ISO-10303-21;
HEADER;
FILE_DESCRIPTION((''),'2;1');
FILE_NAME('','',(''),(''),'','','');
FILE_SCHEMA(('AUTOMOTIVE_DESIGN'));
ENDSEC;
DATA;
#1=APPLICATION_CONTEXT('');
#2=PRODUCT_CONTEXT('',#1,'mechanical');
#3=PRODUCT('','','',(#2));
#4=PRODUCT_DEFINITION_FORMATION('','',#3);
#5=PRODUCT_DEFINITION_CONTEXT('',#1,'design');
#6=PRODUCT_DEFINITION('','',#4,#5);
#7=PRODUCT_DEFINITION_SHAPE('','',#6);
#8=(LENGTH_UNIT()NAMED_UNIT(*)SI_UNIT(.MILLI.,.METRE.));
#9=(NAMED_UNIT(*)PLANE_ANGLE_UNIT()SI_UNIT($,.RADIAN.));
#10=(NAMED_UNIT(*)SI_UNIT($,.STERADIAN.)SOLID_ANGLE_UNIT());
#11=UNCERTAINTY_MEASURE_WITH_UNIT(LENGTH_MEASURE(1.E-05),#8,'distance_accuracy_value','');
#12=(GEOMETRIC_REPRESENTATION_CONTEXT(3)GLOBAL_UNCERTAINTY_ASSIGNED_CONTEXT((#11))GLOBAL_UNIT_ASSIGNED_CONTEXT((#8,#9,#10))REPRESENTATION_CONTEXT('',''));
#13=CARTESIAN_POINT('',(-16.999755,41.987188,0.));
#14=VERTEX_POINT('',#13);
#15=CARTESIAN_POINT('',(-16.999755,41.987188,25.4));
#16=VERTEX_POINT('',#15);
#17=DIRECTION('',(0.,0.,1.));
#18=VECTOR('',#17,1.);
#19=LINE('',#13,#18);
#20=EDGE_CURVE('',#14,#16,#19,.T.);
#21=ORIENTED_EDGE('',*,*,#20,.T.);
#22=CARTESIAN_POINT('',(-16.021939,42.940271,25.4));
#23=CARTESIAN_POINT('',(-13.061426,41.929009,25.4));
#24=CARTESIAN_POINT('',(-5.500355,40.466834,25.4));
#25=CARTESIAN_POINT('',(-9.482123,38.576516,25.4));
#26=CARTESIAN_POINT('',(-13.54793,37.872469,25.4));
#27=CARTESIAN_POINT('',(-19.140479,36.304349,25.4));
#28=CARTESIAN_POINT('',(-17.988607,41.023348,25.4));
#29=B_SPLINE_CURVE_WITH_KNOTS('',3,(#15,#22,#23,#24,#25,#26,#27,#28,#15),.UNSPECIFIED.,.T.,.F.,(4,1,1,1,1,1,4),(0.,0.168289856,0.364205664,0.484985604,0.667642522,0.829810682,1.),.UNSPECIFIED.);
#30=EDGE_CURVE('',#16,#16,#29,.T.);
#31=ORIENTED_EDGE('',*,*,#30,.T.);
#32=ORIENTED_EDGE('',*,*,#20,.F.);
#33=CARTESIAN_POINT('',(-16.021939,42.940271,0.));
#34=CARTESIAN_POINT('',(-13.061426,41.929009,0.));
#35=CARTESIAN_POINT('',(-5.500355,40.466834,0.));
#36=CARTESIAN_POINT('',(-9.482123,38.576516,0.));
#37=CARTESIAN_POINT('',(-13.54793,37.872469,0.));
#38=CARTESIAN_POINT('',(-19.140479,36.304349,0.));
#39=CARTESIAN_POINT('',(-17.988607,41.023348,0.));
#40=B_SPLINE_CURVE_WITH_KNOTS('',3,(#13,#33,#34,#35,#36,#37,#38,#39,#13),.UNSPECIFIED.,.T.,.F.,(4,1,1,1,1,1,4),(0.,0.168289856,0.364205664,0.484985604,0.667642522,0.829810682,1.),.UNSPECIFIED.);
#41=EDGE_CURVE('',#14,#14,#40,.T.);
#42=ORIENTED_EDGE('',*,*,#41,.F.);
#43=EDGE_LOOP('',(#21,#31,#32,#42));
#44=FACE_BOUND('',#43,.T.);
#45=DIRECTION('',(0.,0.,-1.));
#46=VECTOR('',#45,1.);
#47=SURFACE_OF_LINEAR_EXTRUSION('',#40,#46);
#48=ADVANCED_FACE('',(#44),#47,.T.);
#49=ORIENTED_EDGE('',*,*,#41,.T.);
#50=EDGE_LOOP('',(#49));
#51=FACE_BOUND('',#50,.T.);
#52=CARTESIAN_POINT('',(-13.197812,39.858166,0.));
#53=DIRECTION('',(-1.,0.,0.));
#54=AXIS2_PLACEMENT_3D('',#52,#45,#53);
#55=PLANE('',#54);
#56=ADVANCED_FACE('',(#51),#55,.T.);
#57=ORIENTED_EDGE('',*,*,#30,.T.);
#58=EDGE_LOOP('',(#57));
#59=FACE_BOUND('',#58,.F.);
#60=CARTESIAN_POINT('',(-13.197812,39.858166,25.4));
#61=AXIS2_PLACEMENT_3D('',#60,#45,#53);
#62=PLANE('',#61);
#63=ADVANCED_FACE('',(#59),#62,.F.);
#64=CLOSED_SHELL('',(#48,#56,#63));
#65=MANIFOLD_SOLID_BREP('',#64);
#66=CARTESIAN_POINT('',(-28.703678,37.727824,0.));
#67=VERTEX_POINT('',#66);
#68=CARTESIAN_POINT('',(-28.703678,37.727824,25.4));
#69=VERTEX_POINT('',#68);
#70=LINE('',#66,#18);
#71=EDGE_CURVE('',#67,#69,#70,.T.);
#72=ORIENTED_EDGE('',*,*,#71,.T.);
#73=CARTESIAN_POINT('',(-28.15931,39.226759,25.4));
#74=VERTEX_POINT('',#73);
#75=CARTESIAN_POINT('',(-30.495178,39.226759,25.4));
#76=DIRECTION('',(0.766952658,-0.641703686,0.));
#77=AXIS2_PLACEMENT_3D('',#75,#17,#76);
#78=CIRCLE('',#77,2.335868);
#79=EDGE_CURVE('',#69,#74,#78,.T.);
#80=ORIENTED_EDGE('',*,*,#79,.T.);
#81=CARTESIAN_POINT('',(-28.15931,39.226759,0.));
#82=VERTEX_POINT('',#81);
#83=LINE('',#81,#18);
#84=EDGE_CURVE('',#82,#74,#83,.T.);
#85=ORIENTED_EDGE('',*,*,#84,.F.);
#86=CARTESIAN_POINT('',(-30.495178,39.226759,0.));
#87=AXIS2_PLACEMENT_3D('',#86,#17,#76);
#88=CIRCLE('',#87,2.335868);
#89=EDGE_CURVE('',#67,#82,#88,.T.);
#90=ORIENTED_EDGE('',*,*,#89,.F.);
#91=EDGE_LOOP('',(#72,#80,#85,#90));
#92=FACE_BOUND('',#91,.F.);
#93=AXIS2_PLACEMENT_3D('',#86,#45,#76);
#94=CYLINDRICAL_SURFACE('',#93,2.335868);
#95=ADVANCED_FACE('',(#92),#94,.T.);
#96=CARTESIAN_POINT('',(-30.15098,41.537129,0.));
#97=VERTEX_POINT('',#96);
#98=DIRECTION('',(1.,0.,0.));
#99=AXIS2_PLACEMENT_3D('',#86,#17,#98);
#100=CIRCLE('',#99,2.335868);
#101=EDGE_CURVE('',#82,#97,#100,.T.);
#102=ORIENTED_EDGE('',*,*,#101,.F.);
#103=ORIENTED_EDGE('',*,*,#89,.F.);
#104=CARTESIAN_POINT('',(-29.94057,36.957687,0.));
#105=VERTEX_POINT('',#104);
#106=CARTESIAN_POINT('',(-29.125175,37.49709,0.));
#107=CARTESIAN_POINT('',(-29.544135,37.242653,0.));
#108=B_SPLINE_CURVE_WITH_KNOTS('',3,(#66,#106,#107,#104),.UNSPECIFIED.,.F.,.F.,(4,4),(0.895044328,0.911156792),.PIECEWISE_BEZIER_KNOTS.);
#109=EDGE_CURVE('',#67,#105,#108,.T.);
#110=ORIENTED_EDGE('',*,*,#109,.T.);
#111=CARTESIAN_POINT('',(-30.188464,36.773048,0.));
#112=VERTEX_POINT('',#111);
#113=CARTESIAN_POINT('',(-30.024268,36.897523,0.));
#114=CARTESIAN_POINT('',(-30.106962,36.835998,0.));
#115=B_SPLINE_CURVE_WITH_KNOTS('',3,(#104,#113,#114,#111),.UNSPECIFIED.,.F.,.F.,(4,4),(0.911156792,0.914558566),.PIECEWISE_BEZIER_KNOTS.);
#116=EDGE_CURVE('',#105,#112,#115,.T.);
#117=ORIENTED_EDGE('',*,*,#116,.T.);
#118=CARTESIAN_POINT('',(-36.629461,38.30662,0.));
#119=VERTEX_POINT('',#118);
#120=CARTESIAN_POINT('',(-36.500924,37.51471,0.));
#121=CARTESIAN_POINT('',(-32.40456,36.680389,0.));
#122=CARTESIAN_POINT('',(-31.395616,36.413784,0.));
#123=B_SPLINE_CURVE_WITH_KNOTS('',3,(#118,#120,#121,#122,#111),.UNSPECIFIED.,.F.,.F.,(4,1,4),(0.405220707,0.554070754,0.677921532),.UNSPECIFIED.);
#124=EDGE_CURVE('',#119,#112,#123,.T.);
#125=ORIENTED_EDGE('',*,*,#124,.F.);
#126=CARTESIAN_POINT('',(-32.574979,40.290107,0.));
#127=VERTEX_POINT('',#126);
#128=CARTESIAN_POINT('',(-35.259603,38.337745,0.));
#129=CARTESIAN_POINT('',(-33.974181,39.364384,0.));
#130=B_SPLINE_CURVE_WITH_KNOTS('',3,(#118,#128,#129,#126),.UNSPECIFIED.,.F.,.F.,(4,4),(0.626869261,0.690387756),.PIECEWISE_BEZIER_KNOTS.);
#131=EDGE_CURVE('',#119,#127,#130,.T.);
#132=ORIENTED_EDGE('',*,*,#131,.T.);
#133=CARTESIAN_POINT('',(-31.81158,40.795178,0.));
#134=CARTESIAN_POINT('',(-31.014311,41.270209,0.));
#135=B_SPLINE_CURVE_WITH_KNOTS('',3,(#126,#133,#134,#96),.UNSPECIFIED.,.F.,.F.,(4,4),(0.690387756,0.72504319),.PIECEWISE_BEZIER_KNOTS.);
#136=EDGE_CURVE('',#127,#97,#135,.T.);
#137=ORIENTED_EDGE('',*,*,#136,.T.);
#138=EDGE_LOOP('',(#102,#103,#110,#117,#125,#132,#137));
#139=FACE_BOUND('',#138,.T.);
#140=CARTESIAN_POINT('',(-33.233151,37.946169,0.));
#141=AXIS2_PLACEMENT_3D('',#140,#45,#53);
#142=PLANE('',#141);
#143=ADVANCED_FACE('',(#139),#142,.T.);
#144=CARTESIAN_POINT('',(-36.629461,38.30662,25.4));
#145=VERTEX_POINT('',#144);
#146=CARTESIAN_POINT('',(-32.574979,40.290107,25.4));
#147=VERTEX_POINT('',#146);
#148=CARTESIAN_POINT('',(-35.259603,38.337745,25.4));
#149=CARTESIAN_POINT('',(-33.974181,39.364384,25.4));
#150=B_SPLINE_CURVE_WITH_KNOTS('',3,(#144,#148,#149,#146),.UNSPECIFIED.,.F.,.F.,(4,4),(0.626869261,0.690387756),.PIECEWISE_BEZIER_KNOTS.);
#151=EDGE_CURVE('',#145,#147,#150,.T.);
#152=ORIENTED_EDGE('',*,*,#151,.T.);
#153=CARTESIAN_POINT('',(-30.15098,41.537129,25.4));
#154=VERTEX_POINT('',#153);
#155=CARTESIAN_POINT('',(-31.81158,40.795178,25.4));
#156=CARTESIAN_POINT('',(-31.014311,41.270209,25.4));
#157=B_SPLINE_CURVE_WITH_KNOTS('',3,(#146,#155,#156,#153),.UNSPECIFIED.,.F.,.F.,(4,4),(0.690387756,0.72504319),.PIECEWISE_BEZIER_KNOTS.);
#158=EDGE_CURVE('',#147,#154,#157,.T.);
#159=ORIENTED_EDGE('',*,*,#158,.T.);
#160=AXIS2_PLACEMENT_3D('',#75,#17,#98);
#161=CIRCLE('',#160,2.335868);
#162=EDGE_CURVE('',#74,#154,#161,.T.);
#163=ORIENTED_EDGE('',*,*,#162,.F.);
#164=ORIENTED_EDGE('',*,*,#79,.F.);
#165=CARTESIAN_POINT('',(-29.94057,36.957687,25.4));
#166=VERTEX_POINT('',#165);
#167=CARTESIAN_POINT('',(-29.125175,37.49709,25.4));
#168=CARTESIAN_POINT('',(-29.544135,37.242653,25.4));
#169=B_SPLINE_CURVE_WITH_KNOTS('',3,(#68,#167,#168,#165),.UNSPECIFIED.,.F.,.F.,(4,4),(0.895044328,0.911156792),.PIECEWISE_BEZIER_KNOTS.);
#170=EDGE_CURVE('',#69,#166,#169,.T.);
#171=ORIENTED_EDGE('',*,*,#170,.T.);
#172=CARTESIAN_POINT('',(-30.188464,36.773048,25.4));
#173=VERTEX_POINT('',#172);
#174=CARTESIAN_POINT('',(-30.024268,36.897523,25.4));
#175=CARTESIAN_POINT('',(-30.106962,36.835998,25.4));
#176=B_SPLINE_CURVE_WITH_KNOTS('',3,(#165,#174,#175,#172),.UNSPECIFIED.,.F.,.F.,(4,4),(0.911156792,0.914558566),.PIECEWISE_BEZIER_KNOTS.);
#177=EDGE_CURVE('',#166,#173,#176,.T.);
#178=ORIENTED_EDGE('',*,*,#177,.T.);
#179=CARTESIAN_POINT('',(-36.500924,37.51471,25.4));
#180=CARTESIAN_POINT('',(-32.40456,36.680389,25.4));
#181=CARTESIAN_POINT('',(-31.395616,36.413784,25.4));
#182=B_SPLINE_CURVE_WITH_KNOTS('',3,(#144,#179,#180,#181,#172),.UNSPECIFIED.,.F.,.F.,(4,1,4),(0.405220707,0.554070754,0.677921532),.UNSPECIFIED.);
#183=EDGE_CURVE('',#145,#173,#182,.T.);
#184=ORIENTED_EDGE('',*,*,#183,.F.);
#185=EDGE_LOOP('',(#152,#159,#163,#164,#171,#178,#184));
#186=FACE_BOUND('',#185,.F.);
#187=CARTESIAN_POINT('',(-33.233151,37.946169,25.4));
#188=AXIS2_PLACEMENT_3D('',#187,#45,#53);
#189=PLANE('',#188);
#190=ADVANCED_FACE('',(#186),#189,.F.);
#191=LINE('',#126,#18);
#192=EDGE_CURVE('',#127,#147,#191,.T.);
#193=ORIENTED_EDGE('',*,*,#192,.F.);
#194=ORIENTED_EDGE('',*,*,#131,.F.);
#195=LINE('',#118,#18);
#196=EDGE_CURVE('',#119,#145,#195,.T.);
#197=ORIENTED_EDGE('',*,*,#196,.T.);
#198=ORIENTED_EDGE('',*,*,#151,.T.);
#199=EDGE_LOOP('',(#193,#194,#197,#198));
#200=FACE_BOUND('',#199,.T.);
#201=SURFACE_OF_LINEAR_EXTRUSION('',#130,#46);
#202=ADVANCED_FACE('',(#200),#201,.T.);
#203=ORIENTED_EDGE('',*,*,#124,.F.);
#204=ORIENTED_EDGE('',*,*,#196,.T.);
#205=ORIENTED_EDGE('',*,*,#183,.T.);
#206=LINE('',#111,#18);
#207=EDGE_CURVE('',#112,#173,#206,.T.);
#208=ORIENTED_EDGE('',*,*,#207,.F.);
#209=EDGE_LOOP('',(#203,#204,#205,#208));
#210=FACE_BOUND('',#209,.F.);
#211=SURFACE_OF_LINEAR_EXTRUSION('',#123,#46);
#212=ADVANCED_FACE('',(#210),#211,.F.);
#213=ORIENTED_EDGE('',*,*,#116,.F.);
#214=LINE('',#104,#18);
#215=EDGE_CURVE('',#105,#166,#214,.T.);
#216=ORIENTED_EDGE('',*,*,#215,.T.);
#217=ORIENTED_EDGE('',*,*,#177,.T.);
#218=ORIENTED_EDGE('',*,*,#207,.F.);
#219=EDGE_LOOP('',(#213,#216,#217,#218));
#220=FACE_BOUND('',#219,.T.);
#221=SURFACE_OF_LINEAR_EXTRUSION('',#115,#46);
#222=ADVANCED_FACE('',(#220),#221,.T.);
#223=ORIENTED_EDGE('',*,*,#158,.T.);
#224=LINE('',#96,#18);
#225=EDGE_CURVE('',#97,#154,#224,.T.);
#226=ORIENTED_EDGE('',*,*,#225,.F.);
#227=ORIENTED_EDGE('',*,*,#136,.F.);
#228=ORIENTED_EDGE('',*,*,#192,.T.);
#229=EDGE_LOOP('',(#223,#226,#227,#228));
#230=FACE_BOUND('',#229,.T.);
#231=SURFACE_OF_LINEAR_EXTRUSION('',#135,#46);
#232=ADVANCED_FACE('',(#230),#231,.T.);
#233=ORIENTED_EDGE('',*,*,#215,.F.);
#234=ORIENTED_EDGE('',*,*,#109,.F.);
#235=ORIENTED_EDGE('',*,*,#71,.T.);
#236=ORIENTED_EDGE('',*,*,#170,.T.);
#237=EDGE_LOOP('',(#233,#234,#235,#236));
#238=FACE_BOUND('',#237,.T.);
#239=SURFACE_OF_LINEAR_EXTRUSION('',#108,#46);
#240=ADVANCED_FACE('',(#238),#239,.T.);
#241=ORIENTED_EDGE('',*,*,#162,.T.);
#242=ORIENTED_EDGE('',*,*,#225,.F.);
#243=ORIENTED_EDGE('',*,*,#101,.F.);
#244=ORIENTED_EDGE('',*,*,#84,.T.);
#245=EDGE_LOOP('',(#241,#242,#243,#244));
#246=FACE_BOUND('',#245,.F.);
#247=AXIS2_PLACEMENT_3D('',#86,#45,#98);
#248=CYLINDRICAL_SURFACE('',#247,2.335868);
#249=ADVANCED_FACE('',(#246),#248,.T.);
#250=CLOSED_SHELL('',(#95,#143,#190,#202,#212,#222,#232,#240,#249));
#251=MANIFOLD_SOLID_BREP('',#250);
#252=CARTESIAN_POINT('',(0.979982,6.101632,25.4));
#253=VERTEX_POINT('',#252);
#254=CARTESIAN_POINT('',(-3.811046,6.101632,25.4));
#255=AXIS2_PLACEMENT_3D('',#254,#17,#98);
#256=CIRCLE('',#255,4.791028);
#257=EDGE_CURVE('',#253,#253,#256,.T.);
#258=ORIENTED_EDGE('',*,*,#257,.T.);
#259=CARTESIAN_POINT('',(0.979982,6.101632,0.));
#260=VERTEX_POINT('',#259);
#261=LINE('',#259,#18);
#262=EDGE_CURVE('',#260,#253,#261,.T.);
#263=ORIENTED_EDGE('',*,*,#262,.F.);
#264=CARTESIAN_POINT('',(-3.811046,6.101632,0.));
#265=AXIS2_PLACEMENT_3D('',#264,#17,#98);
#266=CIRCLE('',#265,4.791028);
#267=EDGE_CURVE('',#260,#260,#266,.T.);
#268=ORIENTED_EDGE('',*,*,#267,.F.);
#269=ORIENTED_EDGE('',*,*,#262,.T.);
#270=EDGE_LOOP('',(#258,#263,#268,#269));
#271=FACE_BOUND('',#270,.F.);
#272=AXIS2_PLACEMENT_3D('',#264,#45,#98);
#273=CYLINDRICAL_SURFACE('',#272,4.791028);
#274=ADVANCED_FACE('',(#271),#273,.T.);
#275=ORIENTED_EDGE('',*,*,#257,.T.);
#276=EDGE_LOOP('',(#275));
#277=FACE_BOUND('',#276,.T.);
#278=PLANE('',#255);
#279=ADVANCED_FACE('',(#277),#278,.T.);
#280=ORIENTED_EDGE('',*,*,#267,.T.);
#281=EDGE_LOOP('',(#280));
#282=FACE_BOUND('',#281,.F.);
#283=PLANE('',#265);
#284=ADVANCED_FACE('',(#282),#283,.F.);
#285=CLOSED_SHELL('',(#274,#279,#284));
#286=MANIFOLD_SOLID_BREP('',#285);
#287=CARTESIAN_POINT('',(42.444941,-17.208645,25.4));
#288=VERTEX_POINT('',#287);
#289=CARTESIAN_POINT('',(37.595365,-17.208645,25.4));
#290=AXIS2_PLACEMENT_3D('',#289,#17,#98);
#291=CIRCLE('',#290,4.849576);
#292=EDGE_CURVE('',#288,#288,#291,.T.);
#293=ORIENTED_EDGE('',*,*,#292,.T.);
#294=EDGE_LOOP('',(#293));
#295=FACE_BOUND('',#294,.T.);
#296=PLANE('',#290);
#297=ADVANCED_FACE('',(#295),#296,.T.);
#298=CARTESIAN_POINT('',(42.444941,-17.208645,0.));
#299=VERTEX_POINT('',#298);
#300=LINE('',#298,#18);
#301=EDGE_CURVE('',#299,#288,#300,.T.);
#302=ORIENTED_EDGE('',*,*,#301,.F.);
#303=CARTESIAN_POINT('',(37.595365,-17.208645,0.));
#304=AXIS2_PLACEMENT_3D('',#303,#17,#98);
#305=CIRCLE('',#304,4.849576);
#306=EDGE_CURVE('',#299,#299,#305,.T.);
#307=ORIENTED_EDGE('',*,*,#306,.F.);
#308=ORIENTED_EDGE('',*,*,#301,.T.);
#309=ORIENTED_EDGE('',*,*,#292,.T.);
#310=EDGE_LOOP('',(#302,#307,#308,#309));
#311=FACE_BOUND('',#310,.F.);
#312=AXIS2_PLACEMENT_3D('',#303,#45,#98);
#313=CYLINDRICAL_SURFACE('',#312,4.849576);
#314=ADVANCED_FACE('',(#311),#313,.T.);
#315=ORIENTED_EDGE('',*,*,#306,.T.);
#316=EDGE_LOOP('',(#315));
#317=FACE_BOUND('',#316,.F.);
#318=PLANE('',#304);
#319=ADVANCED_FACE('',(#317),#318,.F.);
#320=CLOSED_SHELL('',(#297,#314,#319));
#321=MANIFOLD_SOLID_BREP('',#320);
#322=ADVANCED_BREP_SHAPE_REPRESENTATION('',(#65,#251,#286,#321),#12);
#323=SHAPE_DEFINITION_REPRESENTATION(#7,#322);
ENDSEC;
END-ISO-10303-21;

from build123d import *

# Parameters (mm, degrees)
F1_DEPTH = 25.4
F0_R     = 4.849575774
F0_R_2   = 4.7910280634


with BuildPart() as f1:
    # F0 (on Top) → F1 (new body)
    with BuildSketch(Plane.XY):
        with BuildLine():
            add(Edge.make_bspline(
                [(-36.629460752, 38.306619972), (-35.2596026769, 38.337745191), (-33.9741809776, 39.3643837081), (-32.5749787872, 40.2901070833)],
                knots=[0.6268692611, 0.6268692611, 0.6268692611, 0.6268692611, 0.6903877561, 0.6903877561, 0.6903877561, 0.6903877561], degree=3))
            add(Edge.make_bspline(
                [(-36.629460752, 38.306619972), (-36.5009242652, 37.5147103232), (-32.4045597695, 36.6803890088), (-31.3956164861, 36.4137841195), (-30.1884636283, 36.7730483413)],
                knots=[0.4052207067, 0.4052207067, 0.4052207067, 0.4052207067, 0.5540707536, 0.6779215323, 0.6779215323, 0.6779215323, 0.6779215323], degree=3))
            add(Edge.make_bspline(
                [(-29.9405695443, 36.9576867972), (-30.0242676146, 36.8975228318), (-30.1069616711, 36.8359980864), (-30.1884636283, 36.7730483413)],
                knots=[0.9111567917, 0.9111567917, 0.9111567917, 0.9111567917, 0.914558566, 0.914558566, 0.914558566, 0.914558566], degree=3))
            ThreePointArc((-29.9405695443, 36.9576867972), (-32.3276105514, 37.7781492192), (-32.5749787872, 40.2901070833))
        make_face()
        with BuildLine():
            add(Edge.make_bspline(
                [(-32.5749787872, 40.2901070833), (-31.8115797284, 40.7951780146), (-31.0143110677, 41.2702090361), (-30.1509803545, 41.5371289323)],
                knots=[0.6903877561, 0.6903877561, 0.6903877561, 0.6903877561, 0.7250431902, 0.7250431902, 0.7250431902, 0.7250431902], degree=3))
            ThreePointArc((-32.5749787872, 40.2901070833), (-32.3276105514, 37.7781492192), (-29.9405695443, 36.9576867972))
            add(Edge.make_bspline(
                [(-28.7036776433, 37.7278240007), (-29.1251753541, 37.4970904356), (-29.544134633, 37.2426527017), (-29.9405695443, 36.9576867972)],
                knots=[0.895044328, 0.895044328, 0.895044328, 0.895044328, 0.9111567917, 0.9111567917, 0.9111567917, 0.9111567917], degree=3))
            ThreePointArc((-28.7036776433, 37.7278240007), (-28.2996155266, 38.4293974522), (-28.1593097707, 39.2267592251))
            ThreePointArc((-28.1593097707, 39.2267592251), (-28.7259577315, 40.7519280599), (-30.1509803545, 41.5371289323))
        make_face()
    extrude(amount=F1_DEPTH)


with BuildPart() as f1b:
    # F0 (on Top) → F1, piece 2 (new body)
    with BuildSketch(Plane.XY):
        with BuildLine():
            add(Edge.make_bspline(
                [(-16.9997550547, 41.9871881604), (-16.0219392875, 42.9402709042), (-13.0614260868, 41.9290089772), (-5.5003551978, 40.4668337919), (-9.4821227835, 38.5765156015), (-13.5479301269, 37.8724685241), (-19.1404792258, 36.3043489214), (-17.9886072852, 41.0233481114), (-16.9997550547, 41.9871881604)],
                knots=[0, 0, 0, 0, 0.1682898556, 0.3642056637, 0.4849856044, 0.6676425216, 0.8298106815, 1, 1, 1, 1], degree=3))
        make_face()
    extrude(amount=F1_DEPTH)


with BuildPart() as f1c:
    # F0 (on Top) → F1, piece 3 (new body)
    with BuildSketch(Plane.XY):
        with Locations((37.5953651965, -17.2086451203)):
            Circle(F0_R)
    extrude(amount=F1_DEPTH)


with BuildPart() as f1d:
    # F0 (on Top) → F1, piece 4 (new body)
    with BuildSketch(Plane.XY):
        with Locations((-3.8110457826, 6.1016320251)):
            Circle(F0_R_2)
    extrude(amount=F1_DEPTH)


solid = Compound([f1.part, f1b.part, f1c.part, f1d.part])
